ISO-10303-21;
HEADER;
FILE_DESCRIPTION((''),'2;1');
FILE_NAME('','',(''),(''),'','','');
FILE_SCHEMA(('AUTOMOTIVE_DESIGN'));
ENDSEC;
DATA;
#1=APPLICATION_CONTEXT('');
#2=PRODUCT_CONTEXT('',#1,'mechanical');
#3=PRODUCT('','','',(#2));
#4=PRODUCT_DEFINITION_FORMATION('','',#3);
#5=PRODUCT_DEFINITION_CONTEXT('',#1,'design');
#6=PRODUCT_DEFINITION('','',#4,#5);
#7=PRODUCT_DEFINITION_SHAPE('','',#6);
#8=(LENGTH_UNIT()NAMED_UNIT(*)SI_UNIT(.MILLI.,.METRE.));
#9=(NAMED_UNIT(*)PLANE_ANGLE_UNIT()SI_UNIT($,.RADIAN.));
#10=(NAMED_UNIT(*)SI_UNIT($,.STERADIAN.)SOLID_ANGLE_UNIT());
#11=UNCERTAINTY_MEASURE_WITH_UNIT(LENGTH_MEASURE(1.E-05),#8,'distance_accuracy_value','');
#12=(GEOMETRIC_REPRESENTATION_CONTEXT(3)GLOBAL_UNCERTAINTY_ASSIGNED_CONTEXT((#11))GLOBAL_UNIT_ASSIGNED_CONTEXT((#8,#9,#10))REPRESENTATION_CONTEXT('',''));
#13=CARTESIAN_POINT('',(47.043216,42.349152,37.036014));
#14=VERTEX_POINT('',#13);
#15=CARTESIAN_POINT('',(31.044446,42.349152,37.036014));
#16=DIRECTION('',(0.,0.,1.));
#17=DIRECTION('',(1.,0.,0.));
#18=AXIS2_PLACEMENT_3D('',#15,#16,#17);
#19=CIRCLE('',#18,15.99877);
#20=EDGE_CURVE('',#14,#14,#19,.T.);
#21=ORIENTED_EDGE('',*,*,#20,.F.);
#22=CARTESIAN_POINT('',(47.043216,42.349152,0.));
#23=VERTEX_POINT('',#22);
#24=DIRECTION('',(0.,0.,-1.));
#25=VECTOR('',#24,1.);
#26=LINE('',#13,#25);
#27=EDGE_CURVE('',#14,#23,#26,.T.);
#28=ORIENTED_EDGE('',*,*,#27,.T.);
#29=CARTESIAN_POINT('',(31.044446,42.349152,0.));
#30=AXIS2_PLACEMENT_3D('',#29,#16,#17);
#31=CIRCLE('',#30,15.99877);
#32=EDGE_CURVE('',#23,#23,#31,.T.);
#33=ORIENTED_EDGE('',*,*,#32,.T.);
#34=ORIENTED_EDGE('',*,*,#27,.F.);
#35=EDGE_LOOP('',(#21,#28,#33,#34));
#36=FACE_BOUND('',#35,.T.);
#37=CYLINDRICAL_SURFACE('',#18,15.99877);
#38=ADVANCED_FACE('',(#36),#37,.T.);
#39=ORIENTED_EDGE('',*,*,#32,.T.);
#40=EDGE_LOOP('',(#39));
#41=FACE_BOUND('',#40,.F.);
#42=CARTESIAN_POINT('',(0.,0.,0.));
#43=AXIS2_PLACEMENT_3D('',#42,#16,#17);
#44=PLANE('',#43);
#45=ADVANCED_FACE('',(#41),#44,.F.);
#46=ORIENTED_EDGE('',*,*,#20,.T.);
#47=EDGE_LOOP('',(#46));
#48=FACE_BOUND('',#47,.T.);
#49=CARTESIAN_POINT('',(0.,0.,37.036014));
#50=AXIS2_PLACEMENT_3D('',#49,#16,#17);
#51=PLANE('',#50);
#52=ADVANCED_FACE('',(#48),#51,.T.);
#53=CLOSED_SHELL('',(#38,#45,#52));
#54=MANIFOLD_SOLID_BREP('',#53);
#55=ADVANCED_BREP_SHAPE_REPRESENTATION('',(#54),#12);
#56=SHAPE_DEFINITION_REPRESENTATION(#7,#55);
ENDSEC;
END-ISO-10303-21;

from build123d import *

# Parameters (mm, degrees)
F0_R     = 73.4453519662
F0_R_2   = 16.6359936191
F1_DEPTH = 37.0360137895
F4_R     = 73.4453519662
F4_R_2   = 16.6359936191
F4_R_3   = 15.9987703345
F2_DEPTH = 50.8


# Not quite as in the source:
# - a feature names something its author has since deleted; it is built from what else it names


with BuildPart() as f1:
    # F0 (on Top) → F1 (new body)
    with BuildSketch(Plane.XY):
        Circle(F0_R)
        Circle(F0_R_2, mode=Mode.SUBTRACT)
    extrude(amount=F1_DEPTH)

    # F4 (on face) → F2 (cut)
    with BuildSketch(Plane.XY.offset(37.0360137895)):
        Circle(F4_R)
        Circle(F4_R_2, mode=Mode.SUBTRACT)
        with Locations((31.0444459319, 42.349152267)):
            Circle(F4_R_3, mode=Mode.SUBTRACT)
    extrude(amount=-F2_DEPTH, mode=Mode.SUBTRACT)


solid = f1.part
